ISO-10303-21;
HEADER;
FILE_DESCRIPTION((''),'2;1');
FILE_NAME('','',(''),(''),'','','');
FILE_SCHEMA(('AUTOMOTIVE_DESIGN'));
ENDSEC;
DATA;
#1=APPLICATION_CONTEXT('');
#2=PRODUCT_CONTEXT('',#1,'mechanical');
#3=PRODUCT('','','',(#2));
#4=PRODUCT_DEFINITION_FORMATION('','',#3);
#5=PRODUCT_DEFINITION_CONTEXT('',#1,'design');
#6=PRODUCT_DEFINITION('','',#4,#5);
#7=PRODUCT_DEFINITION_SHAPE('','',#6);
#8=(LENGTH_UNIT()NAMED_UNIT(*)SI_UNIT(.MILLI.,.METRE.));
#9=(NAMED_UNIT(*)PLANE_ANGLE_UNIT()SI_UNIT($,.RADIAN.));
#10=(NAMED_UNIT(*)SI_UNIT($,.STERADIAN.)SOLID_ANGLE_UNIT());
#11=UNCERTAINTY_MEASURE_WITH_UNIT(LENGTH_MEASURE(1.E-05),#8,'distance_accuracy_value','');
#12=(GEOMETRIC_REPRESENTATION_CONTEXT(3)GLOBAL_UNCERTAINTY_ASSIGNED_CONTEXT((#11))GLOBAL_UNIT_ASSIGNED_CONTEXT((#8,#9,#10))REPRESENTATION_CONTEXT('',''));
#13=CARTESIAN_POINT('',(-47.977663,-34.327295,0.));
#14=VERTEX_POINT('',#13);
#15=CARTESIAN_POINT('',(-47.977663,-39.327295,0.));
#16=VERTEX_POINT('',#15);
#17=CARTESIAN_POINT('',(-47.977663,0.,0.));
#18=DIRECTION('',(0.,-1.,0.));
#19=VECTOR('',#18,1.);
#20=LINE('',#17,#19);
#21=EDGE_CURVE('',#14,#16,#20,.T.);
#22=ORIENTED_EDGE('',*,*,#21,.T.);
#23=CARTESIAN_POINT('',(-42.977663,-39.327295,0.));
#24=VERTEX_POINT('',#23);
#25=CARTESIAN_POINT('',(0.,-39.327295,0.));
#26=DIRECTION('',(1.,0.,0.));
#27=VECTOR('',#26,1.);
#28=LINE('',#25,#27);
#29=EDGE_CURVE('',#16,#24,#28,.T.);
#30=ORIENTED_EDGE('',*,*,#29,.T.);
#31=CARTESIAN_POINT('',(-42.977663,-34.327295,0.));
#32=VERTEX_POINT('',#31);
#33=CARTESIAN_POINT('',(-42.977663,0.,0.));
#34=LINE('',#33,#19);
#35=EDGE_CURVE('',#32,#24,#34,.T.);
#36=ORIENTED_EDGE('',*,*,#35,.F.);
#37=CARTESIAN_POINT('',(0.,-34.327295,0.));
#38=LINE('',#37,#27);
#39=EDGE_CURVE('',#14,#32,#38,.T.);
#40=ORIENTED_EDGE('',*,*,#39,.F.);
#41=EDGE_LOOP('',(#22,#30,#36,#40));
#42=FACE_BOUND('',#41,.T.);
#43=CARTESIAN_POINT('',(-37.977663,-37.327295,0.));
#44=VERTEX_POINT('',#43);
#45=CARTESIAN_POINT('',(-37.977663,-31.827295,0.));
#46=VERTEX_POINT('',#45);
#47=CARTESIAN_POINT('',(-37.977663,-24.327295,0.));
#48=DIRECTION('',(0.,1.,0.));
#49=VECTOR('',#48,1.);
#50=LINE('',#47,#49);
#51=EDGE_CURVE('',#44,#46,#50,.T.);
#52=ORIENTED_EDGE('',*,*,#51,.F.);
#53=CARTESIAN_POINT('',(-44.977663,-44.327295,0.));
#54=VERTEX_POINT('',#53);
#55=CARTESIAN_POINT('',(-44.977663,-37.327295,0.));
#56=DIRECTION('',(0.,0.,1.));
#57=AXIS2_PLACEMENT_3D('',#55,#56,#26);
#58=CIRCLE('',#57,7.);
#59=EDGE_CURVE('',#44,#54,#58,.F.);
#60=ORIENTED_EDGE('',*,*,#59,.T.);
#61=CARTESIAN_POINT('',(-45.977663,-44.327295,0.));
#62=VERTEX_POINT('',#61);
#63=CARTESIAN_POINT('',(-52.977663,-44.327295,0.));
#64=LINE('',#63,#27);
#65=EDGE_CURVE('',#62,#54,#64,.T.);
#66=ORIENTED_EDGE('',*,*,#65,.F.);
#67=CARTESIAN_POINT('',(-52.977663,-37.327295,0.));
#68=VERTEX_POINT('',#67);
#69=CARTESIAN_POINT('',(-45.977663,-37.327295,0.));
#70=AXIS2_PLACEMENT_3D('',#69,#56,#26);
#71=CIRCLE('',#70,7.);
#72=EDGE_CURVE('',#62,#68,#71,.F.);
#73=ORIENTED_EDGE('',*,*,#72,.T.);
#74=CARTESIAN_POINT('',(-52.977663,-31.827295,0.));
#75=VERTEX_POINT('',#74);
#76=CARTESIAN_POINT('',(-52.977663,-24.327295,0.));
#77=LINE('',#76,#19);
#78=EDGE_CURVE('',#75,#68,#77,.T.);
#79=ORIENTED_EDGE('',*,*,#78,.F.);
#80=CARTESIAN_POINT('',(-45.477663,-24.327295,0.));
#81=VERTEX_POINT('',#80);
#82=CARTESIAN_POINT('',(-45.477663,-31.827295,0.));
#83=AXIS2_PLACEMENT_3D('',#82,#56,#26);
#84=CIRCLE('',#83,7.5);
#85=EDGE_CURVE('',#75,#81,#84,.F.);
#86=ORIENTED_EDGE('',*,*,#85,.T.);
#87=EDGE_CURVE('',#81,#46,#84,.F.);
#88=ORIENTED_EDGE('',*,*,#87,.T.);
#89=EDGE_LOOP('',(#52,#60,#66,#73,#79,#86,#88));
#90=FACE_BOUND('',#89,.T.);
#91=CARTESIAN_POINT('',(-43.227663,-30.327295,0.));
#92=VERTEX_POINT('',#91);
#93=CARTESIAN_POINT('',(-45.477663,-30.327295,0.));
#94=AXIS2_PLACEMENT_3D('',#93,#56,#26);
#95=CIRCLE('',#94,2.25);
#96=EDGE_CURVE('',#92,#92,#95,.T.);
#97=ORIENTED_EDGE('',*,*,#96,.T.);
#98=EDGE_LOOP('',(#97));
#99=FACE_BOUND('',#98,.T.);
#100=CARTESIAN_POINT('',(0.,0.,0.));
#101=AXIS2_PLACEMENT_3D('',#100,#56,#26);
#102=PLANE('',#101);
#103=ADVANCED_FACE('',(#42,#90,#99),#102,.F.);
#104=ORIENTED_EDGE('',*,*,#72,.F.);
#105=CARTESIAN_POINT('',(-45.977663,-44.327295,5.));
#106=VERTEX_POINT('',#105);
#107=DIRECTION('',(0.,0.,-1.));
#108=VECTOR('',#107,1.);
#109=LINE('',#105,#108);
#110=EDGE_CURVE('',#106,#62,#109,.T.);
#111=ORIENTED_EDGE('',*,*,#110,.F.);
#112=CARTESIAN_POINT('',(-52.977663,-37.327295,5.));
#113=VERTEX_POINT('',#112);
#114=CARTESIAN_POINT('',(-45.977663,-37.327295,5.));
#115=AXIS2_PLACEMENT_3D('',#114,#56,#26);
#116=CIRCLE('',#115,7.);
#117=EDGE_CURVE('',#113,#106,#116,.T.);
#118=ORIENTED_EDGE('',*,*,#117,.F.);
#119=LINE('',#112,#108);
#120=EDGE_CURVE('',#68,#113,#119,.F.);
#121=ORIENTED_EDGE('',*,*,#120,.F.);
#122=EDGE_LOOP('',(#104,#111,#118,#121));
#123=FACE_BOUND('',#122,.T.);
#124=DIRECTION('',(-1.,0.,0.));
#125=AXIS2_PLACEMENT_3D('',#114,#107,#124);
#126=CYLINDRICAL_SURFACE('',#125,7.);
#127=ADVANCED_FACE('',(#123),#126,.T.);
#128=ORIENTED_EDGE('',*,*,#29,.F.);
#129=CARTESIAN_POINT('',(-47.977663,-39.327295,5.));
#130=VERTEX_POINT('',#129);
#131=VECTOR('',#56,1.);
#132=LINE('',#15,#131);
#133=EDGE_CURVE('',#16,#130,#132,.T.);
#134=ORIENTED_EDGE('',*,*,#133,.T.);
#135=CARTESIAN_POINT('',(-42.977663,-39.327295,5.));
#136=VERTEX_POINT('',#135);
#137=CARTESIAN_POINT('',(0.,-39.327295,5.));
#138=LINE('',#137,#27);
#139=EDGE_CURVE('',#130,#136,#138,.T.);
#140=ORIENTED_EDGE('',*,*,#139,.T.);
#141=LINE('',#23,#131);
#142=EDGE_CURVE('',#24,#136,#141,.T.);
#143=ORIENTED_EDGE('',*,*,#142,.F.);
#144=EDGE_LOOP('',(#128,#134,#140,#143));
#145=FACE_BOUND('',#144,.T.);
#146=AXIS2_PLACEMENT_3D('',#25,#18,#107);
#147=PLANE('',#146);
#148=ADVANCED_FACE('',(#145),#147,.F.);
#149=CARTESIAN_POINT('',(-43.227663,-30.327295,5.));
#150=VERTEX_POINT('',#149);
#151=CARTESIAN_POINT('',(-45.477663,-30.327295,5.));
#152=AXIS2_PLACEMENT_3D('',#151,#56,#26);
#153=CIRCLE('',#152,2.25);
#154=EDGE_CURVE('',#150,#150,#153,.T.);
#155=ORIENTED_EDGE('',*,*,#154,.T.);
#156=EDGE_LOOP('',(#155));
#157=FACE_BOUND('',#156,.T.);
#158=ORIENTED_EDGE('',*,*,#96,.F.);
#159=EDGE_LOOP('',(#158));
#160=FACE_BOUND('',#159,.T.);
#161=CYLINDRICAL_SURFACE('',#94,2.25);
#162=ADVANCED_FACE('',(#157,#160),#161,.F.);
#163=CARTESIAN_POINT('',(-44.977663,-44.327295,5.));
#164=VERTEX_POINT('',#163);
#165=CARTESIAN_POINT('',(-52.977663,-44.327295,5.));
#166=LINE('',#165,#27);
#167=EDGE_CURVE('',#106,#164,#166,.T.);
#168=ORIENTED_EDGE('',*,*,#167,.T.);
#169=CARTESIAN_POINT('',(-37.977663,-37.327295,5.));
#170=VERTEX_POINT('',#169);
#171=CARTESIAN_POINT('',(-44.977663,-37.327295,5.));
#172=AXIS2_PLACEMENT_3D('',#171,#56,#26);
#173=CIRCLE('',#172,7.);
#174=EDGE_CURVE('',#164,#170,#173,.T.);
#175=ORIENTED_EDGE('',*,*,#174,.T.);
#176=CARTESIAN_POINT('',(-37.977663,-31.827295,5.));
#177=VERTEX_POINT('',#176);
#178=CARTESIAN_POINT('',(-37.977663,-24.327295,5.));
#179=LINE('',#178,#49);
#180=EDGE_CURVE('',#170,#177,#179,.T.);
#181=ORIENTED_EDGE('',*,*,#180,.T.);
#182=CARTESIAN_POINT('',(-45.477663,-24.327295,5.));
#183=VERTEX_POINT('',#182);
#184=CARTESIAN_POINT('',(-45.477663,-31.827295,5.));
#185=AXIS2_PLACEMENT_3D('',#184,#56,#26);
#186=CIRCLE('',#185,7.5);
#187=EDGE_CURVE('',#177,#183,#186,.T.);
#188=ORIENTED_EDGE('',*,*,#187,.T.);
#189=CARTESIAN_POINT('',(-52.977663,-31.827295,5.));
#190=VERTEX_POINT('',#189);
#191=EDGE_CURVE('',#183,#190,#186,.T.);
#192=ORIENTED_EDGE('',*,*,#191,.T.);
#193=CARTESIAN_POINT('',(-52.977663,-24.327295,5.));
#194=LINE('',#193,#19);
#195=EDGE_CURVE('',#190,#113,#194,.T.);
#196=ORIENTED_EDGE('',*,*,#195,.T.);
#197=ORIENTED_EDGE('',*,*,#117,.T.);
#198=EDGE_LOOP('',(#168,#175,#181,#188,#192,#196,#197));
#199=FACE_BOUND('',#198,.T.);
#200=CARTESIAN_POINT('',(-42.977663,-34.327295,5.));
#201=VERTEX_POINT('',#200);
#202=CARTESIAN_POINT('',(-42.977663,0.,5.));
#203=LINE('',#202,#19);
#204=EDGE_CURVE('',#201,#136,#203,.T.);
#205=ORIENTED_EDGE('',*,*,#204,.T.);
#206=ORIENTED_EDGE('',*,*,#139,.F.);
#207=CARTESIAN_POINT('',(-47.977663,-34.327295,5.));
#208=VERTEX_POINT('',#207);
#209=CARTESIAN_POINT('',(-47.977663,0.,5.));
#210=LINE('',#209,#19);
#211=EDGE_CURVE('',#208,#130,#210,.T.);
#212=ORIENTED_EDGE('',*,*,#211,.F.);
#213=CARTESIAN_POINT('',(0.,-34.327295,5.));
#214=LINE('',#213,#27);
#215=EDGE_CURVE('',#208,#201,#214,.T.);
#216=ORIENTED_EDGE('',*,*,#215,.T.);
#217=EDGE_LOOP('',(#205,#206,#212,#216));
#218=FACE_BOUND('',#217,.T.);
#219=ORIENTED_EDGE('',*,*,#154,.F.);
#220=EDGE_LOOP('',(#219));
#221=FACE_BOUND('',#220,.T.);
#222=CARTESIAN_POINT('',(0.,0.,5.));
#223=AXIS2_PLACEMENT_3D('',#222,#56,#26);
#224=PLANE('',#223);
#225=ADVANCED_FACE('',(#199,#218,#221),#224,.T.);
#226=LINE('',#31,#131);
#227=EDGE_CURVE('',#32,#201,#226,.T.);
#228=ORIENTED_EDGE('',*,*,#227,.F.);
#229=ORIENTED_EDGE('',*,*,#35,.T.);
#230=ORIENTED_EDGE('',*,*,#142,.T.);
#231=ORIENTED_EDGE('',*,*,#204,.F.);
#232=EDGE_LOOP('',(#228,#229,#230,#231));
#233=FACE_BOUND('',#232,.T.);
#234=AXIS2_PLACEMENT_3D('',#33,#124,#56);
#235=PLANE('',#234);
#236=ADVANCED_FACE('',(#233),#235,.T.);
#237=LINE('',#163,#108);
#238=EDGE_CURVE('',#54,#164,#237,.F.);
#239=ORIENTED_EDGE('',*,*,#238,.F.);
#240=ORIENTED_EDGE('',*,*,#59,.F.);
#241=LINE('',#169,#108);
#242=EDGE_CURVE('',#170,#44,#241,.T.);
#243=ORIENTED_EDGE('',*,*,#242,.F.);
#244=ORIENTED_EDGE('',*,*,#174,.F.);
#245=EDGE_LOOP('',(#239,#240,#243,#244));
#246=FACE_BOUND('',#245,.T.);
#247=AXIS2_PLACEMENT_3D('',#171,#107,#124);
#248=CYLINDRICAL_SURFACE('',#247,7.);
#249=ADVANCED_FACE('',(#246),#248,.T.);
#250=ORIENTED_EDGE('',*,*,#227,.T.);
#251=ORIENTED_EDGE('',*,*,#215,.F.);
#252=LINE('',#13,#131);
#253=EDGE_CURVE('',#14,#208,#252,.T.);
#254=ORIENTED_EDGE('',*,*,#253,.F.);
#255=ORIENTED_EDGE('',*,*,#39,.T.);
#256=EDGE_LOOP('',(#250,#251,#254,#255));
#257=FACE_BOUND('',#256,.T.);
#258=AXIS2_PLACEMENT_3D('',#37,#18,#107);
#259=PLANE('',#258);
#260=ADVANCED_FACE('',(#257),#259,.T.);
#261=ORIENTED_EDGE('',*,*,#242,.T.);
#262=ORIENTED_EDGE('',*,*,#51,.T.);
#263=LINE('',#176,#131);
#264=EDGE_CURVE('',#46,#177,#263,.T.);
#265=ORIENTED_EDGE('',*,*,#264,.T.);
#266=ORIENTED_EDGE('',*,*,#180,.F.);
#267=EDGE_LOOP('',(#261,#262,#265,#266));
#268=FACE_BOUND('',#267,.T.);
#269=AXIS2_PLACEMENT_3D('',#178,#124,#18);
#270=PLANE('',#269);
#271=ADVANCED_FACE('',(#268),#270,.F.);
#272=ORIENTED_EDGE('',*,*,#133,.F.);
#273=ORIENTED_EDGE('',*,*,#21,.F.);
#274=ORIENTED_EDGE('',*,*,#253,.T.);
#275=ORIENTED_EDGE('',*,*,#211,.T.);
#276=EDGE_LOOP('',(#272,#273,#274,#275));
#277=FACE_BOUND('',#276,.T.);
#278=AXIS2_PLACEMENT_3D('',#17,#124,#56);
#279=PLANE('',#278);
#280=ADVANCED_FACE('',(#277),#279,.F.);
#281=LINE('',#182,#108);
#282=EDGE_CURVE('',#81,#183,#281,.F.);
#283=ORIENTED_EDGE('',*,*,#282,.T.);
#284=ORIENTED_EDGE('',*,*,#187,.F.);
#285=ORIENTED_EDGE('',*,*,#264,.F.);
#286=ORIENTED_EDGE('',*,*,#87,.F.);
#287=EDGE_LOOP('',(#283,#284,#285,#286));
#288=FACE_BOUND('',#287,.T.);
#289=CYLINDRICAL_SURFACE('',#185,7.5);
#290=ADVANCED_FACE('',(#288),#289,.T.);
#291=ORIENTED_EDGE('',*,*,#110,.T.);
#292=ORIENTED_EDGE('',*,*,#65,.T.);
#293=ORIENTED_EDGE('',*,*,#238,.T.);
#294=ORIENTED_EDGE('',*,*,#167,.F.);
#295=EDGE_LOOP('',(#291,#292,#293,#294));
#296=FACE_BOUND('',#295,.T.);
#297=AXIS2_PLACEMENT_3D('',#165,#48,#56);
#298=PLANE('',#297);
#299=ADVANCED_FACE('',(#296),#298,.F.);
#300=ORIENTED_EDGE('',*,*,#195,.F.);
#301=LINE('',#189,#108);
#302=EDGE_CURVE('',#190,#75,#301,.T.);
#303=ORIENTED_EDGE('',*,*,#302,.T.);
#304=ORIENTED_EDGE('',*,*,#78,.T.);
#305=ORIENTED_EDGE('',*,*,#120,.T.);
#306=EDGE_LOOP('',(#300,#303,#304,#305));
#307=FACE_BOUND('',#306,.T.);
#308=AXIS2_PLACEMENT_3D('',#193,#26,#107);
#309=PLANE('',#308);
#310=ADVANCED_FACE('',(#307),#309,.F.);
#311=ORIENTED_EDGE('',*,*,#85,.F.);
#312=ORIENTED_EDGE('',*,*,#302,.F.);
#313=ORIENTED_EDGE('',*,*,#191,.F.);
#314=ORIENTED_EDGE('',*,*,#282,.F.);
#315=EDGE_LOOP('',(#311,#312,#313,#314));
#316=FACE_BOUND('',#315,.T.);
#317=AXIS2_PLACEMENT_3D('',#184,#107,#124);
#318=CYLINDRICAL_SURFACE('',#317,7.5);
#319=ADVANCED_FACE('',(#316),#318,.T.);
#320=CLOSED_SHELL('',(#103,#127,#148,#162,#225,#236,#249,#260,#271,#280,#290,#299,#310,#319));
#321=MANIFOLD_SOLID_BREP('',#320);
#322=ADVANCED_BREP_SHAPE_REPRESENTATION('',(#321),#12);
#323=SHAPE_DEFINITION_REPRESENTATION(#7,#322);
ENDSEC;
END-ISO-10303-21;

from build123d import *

# Parameters (mm, degrees)
ESQUISSE1_W             = 15
ESQUISSE1_H             = 20
BOSS_EXTRU_1_DEPTH      = 5
ESQUISSE2_W             = 5
ESQUISSE2_H             = 5
ESQUISSE2_R             = 2.25
ENL_V_MAT_EXTRU_1_DEPTH = 5
CONG_1_R                = 7.5
CONG_4_R                = 7.5
CONG_5_R                = 7


with BuildPart() as part:
    # Esquisse1 → Boss.-Extru.1 (new body)
    with BuildSketch(Plane.XY):
        with Locations((-45.477663375, -34.327294686)):
            Rectangle(ESQUISSE1_W, ESQUISSE1_H)
    extrude(amount=BOSS_EXTRU_1_DEPTH)

    # Esquisse2 → Enlèv. mat.-Extru.1 (cut)
    with BuildSketch(Plane.XY.offset(5)):
        with Locations((-45.477663375, -36.827294686)):
            Rectangle(ESQUISSE2_W, ESQUISSE2_H)
        with Locations((-45.477663375, -30.327294686)):
            Circle(ESQUISSE2_R)
    extrude(amount=-ENL_V_MAT_EXTRU_1_DEPTH, mode=Mode.SUBTRACT)

    # Congé1
    cong_1_edges = [part.edges().sort_by_distance(p)[0] for p in [
        (-52.977663375, -24.327294686, 2.5),
    ]]
    fillet(cong_1_edges, radius=CONG_1_R)

    # Congé4
    cong_4_edges = [part.edges().sort_by_distance(p)[0] for p in [
        (-37.977663375, -24.327294686, 2.5),
    ]]
    fillet(cong_4_edges, radius=CONG_4_R - 0.0001)  # a hair under: the kernel refuses the full size

    # Congé5
    cong_5_edges = [part.edges().sort_by_distance(p)[0] for p in [
        (-37.977663375, -44.327294686, 2.5),
        (-52.977663375, -44.327294686, 2.5),
    ]]
    fillet(cong_5_edges, radius=CONG_5_R)


solid = part.part
